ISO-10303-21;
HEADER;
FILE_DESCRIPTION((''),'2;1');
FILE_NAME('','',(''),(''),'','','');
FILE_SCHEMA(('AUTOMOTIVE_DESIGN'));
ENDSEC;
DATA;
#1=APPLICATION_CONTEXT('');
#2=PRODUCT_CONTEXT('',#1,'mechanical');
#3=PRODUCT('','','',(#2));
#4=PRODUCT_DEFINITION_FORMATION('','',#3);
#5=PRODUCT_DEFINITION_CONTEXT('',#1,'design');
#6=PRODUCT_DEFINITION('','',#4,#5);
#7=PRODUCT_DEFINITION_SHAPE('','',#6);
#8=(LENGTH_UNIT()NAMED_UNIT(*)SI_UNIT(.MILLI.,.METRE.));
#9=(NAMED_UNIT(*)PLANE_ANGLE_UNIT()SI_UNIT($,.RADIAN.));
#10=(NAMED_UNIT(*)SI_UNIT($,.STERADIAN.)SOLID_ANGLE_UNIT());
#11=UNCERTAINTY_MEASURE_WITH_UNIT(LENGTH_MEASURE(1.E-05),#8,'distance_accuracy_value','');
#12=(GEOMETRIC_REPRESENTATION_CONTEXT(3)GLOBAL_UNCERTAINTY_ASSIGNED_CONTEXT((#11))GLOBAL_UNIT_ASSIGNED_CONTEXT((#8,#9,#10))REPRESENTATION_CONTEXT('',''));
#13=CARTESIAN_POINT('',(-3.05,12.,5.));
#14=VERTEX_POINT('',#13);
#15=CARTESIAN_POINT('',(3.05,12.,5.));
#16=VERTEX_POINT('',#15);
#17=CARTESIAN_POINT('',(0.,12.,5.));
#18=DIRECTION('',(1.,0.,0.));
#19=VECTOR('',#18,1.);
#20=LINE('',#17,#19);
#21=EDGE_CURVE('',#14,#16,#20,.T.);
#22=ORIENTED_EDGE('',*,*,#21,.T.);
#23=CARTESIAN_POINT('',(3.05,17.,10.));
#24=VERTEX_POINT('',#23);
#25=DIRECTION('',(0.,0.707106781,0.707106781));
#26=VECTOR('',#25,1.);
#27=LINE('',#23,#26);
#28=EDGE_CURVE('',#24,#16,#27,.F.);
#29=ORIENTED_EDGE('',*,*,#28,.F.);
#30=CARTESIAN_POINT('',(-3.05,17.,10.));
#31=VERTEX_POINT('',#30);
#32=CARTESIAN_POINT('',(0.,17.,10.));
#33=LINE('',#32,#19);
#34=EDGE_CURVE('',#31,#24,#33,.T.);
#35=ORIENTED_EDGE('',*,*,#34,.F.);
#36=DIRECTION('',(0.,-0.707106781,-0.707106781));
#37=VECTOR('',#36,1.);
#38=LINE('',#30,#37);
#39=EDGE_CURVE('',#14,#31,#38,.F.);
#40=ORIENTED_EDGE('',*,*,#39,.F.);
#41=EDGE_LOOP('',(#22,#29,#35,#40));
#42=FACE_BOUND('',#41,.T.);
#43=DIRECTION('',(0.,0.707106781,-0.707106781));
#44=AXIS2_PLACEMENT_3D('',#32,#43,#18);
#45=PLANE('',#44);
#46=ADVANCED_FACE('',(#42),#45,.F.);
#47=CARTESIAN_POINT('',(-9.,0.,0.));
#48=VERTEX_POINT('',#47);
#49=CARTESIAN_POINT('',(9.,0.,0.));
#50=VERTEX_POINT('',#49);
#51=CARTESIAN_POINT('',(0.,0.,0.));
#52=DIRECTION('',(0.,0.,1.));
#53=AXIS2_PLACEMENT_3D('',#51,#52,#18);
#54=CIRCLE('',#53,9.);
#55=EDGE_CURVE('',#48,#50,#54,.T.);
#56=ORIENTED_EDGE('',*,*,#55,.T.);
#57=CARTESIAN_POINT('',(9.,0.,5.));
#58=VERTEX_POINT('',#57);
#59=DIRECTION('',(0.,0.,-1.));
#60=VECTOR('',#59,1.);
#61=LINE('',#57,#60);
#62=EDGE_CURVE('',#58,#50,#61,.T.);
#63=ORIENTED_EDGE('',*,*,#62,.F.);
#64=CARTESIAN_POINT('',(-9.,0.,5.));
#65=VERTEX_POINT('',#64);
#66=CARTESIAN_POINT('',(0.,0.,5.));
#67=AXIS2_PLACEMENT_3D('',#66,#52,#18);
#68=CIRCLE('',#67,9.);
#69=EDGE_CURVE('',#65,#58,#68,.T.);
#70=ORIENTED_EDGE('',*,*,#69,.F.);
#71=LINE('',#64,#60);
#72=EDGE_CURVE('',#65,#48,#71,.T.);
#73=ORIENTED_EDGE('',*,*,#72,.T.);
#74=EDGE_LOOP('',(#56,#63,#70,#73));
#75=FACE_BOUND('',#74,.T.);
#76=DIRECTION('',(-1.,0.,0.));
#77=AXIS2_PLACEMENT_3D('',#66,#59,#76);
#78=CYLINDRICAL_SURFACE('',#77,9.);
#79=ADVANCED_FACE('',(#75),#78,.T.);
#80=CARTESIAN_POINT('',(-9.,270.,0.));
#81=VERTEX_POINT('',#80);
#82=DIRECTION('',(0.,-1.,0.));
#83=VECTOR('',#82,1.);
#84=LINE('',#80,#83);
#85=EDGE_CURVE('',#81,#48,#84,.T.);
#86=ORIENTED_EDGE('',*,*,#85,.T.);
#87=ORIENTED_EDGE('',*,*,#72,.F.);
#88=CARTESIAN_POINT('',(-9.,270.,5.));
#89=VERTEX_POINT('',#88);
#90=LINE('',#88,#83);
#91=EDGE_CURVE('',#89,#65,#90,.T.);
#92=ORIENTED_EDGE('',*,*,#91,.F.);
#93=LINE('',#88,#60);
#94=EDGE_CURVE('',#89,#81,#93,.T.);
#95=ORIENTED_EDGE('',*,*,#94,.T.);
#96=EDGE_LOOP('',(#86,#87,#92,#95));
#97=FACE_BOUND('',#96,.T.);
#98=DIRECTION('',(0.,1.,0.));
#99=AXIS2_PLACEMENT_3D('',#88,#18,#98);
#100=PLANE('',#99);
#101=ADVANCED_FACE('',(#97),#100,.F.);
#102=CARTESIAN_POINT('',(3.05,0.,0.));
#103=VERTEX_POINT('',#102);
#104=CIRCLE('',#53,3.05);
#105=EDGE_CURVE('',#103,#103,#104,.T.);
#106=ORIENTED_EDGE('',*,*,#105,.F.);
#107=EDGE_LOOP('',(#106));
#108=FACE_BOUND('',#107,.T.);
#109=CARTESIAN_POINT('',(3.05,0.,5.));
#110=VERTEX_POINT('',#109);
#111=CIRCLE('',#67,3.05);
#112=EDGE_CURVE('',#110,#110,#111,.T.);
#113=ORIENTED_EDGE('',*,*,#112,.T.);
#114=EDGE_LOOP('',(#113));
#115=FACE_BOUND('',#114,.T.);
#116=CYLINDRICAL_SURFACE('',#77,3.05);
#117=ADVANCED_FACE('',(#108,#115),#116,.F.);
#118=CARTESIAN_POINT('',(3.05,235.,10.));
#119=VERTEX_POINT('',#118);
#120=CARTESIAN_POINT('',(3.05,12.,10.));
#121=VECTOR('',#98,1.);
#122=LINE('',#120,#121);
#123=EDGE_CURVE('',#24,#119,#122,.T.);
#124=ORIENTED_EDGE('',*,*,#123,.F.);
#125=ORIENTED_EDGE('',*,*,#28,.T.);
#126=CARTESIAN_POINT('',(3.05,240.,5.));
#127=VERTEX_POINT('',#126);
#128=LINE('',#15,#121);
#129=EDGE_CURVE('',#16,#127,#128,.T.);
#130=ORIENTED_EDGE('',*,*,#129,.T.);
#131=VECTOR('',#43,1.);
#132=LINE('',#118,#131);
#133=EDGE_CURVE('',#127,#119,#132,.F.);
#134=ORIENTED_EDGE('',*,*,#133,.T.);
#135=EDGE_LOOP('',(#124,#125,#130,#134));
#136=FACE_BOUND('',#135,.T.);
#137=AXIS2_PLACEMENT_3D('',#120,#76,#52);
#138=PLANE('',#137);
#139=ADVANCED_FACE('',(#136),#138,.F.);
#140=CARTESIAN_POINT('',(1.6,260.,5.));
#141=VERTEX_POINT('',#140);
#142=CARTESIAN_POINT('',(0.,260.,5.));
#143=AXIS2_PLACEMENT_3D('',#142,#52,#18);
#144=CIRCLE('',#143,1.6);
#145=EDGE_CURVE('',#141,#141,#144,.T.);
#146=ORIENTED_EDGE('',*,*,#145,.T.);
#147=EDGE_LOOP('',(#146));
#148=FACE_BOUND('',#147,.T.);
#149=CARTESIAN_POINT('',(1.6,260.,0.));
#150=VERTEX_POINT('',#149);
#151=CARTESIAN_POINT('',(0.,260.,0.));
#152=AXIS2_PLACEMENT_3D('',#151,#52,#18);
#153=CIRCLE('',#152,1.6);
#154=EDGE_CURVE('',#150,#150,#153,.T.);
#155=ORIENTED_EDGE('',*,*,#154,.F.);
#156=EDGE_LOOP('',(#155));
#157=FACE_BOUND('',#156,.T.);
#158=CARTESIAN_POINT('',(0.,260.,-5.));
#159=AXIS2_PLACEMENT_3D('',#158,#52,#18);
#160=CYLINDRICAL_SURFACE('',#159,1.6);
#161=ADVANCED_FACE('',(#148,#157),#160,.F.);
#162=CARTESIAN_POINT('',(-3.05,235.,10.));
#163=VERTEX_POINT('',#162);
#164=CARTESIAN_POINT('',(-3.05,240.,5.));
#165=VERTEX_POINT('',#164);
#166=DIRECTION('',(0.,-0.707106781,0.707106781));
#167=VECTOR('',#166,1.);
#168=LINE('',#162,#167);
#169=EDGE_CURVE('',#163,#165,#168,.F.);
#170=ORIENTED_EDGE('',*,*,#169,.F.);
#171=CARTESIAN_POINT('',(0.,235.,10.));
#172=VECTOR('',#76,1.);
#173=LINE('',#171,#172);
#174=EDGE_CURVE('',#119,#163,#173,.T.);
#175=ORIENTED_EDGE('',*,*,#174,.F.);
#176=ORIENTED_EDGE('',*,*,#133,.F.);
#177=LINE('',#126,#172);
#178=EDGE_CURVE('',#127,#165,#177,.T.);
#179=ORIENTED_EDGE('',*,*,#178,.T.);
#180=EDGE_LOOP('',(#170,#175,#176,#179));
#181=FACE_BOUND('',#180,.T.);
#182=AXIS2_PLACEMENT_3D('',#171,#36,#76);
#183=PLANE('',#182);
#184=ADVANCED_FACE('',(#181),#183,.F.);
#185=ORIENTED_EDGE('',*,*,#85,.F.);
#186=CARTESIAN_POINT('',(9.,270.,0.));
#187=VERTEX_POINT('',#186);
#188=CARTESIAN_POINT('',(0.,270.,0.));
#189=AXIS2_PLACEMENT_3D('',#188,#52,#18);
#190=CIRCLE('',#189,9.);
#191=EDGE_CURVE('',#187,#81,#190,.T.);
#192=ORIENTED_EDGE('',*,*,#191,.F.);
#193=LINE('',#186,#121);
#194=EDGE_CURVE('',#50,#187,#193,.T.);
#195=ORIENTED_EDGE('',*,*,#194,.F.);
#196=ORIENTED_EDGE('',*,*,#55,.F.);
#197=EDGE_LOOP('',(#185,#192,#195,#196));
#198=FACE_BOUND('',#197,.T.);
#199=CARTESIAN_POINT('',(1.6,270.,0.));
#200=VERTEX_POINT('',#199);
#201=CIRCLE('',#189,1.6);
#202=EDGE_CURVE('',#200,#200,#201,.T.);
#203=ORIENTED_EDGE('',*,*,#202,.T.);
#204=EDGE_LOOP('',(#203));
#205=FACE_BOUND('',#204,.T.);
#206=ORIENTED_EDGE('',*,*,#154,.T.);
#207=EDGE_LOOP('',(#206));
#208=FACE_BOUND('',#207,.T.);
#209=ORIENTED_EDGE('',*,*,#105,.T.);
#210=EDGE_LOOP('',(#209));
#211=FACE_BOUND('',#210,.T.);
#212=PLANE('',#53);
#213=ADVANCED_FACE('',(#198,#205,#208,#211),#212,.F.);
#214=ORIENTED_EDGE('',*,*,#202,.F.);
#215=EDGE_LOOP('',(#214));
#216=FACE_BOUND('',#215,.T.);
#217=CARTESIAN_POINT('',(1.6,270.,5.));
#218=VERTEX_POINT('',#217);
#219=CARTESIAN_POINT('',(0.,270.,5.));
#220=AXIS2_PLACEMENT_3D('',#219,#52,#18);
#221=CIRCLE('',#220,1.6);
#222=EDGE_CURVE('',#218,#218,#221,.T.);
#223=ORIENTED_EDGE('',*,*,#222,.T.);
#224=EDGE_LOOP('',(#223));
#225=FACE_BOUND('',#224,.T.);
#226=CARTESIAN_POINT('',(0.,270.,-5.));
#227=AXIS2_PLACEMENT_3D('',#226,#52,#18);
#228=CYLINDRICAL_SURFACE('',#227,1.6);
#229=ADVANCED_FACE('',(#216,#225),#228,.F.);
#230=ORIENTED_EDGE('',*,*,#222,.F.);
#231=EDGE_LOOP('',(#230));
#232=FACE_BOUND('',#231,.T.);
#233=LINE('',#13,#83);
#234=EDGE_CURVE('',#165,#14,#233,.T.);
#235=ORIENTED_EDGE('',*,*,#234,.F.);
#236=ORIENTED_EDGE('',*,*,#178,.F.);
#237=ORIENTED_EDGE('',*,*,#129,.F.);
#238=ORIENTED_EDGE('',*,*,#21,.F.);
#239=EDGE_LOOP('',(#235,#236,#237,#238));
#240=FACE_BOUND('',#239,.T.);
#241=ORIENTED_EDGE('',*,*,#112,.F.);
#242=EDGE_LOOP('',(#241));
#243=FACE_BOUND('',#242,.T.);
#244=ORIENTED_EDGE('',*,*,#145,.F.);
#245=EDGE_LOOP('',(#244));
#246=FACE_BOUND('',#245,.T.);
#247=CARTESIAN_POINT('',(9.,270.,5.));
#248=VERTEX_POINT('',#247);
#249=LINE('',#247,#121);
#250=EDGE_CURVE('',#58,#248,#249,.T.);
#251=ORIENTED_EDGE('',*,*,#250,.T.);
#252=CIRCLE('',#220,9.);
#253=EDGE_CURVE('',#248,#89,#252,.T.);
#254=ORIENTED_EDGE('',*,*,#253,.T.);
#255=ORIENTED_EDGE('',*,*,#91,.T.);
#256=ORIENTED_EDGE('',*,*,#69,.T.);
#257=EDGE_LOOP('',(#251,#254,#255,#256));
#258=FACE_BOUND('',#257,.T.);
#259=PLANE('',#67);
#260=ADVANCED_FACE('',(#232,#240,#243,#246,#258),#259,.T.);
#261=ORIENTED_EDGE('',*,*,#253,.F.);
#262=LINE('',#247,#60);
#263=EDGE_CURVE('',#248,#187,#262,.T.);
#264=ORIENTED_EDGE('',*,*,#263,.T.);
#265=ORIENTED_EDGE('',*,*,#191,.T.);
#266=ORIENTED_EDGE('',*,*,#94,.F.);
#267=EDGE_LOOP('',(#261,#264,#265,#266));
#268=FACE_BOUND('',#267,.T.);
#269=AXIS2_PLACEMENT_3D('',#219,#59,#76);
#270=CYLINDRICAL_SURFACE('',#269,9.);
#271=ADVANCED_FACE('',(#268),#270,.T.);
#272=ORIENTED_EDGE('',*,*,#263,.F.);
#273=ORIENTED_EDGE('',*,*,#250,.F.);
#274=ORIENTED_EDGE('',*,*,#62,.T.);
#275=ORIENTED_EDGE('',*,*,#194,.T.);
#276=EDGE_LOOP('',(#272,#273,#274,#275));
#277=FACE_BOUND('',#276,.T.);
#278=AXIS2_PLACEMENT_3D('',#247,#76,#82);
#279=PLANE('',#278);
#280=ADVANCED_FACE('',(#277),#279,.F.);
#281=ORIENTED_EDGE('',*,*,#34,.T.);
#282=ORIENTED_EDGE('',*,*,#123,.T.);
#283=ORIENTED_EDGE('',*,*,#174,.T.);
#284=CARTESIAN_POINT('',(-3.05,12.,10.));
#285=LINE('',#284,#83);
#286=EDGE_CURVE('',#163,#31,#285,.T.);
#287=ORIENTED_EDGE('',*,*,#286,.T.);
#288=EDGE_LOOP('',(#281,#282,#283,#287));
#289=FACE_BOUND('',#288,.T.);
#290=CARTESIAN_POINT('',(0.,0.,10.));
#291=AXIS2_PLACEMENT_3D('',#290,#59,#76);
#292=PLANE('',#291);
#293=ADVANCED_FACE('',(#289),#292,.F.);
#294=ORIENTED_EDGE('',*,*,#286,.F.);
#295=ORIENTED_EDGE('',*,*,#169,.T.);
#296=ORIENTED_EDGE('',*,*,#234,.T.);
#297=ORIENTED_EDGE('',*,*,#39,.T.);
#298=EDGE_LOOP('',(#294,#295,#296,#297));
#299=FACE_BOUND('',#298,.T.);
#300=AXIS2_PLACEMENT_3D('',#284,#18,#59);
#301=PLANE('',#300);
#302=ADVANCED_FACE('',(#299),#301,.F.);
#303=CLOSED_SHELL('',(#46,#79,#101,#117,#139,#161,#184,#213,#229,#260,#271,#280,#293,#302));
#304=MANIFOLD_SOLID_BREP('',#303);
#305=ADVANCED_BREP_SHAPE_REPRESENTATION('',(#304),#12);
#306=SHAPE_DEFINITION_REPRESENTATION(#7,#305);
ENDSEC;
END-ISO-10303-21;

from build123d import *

# Parameters (mm, degrees)
SKETCH1_R           = 3.05
BOSS_EXTRUDE1_DEPTH = 5
SKETCH2_R           = 1.6
CUT_EXTRUDE1_DEPTH  = 10
BOSS_EXTRUDE2_DEPTH = 5
CHAMFER1_SIZE       = 5


with BuildPart() as part:
    # Sketch1 → Boss-Extrude1 (new body)
    with BuildSketch(Plane.XY):
        with BuildLine():
            Line((9, 270), (9, 0))
            ThreePointArc((9, 0), (0, -9), (-9, 0))
            Line((-9, 0), (-9, 270))
            ThreePointArc((-9, 270), (0, 279), (9, 270))
        make_face()
        Circle(SKETCH1_R, mode=Mode.SUBTRACT)
    extrude(amount=BOSS_EXTRUDE1_DEPTH)

    # Sketch2 → Cut-Extrude1 (cut)
    with BuildSketch(Plane.XY.offset(5)):
        with Locations((0, 270)):
            Circle(SKETCH2_R)
        with Locations((0, 260)):
            Circle(SKETCH2_R)
    extrude(amount=-CUT_EXTRUDE1_DEPTH, mode=Mode.SUBTRACT)

    # Sketch3 → Boss-Extrude2 (add)
    with BuildSketch(Plane.XY.offset(5)):
        Polygon((-3.05, 12), (-3.05, 240), (3.05, 240), (3.05, 12), (0, 12), align=None)
    extrude(amount=BOSS_EXTRUDE2_DEPTH)

    # Chamfer1
    chamfer1_edges = [part.edges().sort_by_distance(p)[0] for p in [
        (0, 240, 10),
        (0, 12, 10),
    ]]
    chamfer(chamfer1_edges, length=CHAMFER1_SIZE - 0.0001)  # a hair under: the kernel refuses the full size


solid = part.part
